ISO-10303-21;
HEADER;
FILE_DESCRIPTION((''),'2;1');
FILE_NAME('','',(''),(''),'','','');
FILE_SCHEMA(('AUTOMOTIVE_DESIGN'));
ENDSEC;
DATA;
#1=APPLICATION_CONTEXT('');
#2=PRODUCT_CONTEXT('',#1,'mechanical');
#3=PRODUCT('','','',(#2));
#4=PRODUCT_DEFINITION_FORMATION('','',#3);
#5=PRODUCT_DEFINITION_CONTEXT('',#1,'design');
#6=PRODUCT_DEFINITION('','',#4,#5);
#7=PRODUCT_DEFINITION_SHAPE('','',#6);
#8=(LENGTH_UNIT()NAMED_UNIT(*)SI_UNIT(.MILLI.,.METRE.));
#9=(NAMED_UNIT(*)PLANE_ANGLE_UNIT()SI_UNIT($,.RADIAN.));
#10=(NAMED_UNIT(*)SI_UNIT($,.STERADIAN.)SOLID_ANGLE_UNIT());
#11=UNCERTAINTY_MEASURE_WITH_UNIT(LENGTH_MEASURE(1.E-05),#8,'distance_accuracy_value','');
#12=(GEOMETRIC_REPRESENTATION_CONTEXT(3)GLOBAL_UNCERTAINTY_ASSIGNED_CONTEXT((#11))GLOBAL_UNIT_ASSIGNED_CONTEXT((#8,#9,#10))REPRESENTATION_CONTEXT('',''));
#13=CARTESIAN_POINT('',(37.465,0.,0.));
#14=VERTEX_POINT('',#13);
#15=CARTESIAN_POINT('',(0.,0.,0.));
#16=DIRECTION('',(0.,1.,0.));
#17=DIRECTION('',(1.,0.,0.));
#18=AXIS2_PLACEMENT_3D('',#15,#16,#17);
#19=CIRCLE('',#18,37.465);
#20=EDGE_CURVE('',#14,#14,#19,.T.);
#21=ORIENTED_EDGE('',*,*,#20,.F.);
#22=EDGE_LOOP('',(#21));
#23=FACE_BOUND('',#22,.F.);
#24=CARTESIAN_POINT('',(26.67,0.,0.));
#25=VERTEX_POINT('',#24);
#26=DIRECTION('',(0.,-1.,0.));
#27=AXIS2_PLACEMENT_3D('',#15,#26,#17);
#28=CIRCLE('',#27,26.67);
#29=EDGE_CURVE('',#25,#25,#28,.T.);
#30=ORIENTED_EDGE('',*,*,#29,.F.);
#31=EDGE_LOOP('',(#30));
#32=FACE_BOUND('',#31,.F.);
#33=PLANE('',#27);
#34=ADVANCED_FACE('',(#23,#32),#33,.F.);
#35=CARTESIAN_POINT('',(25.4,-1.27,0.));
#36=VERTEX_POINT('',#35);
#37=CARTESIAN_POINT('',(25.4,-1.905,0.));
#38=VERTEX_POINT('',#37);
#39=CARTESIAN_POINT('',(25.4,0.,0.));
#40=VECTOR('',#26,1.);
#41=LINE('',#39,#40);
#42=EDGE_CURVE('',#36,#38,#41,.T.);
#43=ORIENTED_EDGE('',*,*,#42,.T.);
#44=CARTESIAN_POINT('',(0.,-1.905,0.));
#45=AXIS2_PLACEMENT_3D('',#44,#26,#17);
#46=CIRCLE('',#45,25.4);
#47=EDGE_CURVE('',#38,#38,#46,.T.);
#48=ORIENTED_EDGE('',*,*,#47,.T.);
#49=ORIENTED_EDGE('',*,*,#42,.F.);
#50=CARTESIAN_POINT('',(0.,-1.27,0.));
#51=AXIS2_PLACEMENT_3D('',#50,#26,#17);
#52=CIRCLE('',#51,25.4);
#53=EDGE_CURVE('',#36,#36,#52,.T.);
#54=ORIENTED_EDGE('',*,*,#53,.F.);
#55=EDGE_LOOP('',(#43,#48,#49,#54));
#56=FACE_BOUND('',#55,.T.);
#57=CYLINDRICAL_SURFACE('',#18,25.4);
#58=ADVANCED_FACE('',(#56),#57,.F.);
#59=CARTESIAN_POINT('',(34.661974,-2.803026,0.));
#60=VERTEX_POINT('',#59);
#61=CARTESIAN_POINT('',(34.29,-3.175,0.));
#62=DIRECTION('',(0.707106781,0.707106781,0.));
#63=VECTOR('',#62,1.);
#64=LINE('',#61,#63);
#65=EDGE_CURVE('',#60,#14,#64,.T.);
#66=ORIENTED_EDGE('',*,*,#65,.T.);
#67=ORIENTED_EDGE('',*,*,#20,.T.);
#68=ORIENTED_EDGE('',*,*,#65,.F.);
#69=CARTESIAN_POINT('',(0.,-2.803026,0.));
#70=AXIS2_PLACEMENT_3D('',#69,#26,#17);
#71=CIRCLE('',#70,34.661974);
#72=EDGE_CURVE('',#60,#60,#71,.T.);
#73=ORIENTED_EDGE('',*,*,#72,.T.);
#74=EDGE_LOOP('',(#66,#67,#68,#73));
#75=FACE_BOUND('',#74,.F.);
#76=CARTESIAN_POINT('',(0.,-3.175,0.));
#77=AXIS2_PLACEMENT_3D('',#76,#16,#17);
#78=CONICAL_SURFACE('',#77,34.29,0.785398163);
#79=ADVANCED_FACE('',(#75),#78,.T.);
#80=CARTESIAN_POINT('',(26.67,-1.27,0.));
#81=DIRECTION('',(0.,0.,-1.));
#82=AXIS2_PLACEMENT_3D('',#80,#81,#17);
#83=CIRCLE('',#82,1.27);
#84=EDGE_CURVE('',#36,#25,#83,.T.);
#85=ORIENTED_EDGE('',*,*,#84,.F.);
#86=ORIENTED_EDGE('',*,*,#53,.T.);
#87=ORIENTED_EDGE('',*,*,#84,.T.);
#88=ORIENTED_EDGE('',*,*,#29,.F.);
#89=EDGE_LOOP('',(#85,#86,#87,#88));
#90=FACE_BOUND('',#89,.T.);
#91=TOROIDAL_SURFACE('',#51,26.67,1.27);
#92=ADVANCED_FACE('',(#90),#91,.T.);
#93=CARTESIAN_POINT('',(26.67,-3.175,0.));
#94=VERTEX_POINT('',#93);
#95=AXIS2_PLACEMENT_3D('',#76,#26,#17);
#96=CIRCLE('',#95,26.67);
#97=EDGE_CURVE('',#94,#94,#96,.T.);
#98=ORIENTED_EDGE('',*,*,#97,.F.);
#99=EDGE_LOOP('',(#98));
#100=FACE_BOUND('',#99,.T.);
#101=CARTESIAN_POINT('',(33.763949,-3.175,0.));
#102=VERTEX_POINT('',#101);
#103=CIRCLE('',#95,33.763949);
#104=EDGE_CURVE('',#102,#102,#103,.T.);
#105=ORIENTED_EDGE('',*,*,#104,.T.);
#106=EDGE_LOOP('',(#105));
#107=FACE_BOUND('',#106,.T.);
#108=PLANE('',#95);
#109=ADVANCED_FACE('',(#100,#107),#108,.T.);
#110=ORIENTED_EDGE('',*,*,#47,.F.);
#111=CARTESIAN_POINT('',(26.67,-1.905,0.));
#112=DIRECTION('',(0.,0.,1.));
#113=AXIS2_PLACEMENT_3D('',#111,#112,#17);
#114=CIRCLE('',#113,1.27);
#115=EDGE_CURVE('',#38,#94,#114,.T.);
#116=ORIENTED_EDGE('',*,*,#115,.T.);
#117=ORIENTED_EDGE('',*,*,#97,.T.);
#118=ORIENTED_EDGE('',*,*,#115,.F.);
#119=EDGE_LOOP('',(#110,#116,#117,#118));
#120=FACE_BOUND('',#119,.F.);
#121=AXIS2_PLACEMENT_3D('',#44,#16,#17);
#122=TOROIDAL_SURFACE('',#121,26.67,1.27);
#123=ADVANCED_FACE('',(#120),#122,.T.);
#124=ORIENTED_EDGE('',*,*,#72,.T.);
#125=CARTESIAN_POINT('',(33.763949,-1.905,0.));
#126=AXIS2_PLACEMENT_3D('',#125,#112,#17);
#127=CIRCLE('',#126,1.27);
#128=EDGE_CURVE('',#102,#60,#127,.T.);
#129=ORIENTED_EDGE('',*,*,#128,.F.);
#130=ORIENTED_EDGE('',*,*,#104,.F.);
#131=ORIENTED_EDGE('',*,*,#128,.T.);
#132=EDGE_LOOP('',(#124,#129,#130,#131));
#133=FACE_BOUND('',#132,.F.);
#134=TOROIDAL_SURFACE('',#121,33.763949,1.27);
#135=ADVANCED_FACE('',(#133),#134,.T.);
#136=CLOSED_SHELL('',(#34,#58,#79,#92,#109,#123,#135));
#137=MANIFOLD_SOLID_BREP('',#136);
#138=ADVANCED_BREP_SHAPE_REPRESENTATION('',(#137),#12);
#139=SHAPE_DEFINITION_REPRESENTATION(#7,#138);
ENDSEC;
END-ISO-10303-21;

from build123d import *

# Parameters (mm, degrees)
F0_R     = 38.1
F0_R_2   = 25.4
F1_DEPTH = 3.175
F2_R     = 1.27
F3_R     = 1.27


# Not quite as in the source:
# - a fillet or chamfer that OpenCascade refuses, or shapes differently, is made with other operations: its cross-section is extruded or revolved along the edge and cut away or added


with BuildPart() as f1:
    # F0 (on Front) → F1 (new body)
    with BuildSketch(Plane.XZ):
        Circle(F0_R)
        Circle(F0_R_2, mode=Mode.SUBTRACT)
    extrude(amount=F1_DEPTH)

    # F2
    f2_edges = [f1.edges().sort_by_distance(p)[0] for p in [
        (-25.4, 0, 0),
        (-25.4, -3.175, 0),
    ]]
    fillet(f2_edges, radius=F2_R)

    # F4: chamfer of 3.81 on 1 edges, made by hand

    # F4_s1 → F4_t2 (revolve, cut)
    with BuildSketch(Plane.XY):
        Polygon((34.29, -3.175), (38.1, 0.635), (38.1, -3.175), align=None)
    revolve(axis=Axis((0, -3.175, 0), (0, -1, 0)), mode=Mode.SUBTRACT)

    # F3
    f3_edges = [f1.edges().sort_by_distance(p)[0] for p in [
        (-34.29, -3.175, 0),
    ]]
    fillet(f3_edges, radius=F3_R)


solid = f1.part
